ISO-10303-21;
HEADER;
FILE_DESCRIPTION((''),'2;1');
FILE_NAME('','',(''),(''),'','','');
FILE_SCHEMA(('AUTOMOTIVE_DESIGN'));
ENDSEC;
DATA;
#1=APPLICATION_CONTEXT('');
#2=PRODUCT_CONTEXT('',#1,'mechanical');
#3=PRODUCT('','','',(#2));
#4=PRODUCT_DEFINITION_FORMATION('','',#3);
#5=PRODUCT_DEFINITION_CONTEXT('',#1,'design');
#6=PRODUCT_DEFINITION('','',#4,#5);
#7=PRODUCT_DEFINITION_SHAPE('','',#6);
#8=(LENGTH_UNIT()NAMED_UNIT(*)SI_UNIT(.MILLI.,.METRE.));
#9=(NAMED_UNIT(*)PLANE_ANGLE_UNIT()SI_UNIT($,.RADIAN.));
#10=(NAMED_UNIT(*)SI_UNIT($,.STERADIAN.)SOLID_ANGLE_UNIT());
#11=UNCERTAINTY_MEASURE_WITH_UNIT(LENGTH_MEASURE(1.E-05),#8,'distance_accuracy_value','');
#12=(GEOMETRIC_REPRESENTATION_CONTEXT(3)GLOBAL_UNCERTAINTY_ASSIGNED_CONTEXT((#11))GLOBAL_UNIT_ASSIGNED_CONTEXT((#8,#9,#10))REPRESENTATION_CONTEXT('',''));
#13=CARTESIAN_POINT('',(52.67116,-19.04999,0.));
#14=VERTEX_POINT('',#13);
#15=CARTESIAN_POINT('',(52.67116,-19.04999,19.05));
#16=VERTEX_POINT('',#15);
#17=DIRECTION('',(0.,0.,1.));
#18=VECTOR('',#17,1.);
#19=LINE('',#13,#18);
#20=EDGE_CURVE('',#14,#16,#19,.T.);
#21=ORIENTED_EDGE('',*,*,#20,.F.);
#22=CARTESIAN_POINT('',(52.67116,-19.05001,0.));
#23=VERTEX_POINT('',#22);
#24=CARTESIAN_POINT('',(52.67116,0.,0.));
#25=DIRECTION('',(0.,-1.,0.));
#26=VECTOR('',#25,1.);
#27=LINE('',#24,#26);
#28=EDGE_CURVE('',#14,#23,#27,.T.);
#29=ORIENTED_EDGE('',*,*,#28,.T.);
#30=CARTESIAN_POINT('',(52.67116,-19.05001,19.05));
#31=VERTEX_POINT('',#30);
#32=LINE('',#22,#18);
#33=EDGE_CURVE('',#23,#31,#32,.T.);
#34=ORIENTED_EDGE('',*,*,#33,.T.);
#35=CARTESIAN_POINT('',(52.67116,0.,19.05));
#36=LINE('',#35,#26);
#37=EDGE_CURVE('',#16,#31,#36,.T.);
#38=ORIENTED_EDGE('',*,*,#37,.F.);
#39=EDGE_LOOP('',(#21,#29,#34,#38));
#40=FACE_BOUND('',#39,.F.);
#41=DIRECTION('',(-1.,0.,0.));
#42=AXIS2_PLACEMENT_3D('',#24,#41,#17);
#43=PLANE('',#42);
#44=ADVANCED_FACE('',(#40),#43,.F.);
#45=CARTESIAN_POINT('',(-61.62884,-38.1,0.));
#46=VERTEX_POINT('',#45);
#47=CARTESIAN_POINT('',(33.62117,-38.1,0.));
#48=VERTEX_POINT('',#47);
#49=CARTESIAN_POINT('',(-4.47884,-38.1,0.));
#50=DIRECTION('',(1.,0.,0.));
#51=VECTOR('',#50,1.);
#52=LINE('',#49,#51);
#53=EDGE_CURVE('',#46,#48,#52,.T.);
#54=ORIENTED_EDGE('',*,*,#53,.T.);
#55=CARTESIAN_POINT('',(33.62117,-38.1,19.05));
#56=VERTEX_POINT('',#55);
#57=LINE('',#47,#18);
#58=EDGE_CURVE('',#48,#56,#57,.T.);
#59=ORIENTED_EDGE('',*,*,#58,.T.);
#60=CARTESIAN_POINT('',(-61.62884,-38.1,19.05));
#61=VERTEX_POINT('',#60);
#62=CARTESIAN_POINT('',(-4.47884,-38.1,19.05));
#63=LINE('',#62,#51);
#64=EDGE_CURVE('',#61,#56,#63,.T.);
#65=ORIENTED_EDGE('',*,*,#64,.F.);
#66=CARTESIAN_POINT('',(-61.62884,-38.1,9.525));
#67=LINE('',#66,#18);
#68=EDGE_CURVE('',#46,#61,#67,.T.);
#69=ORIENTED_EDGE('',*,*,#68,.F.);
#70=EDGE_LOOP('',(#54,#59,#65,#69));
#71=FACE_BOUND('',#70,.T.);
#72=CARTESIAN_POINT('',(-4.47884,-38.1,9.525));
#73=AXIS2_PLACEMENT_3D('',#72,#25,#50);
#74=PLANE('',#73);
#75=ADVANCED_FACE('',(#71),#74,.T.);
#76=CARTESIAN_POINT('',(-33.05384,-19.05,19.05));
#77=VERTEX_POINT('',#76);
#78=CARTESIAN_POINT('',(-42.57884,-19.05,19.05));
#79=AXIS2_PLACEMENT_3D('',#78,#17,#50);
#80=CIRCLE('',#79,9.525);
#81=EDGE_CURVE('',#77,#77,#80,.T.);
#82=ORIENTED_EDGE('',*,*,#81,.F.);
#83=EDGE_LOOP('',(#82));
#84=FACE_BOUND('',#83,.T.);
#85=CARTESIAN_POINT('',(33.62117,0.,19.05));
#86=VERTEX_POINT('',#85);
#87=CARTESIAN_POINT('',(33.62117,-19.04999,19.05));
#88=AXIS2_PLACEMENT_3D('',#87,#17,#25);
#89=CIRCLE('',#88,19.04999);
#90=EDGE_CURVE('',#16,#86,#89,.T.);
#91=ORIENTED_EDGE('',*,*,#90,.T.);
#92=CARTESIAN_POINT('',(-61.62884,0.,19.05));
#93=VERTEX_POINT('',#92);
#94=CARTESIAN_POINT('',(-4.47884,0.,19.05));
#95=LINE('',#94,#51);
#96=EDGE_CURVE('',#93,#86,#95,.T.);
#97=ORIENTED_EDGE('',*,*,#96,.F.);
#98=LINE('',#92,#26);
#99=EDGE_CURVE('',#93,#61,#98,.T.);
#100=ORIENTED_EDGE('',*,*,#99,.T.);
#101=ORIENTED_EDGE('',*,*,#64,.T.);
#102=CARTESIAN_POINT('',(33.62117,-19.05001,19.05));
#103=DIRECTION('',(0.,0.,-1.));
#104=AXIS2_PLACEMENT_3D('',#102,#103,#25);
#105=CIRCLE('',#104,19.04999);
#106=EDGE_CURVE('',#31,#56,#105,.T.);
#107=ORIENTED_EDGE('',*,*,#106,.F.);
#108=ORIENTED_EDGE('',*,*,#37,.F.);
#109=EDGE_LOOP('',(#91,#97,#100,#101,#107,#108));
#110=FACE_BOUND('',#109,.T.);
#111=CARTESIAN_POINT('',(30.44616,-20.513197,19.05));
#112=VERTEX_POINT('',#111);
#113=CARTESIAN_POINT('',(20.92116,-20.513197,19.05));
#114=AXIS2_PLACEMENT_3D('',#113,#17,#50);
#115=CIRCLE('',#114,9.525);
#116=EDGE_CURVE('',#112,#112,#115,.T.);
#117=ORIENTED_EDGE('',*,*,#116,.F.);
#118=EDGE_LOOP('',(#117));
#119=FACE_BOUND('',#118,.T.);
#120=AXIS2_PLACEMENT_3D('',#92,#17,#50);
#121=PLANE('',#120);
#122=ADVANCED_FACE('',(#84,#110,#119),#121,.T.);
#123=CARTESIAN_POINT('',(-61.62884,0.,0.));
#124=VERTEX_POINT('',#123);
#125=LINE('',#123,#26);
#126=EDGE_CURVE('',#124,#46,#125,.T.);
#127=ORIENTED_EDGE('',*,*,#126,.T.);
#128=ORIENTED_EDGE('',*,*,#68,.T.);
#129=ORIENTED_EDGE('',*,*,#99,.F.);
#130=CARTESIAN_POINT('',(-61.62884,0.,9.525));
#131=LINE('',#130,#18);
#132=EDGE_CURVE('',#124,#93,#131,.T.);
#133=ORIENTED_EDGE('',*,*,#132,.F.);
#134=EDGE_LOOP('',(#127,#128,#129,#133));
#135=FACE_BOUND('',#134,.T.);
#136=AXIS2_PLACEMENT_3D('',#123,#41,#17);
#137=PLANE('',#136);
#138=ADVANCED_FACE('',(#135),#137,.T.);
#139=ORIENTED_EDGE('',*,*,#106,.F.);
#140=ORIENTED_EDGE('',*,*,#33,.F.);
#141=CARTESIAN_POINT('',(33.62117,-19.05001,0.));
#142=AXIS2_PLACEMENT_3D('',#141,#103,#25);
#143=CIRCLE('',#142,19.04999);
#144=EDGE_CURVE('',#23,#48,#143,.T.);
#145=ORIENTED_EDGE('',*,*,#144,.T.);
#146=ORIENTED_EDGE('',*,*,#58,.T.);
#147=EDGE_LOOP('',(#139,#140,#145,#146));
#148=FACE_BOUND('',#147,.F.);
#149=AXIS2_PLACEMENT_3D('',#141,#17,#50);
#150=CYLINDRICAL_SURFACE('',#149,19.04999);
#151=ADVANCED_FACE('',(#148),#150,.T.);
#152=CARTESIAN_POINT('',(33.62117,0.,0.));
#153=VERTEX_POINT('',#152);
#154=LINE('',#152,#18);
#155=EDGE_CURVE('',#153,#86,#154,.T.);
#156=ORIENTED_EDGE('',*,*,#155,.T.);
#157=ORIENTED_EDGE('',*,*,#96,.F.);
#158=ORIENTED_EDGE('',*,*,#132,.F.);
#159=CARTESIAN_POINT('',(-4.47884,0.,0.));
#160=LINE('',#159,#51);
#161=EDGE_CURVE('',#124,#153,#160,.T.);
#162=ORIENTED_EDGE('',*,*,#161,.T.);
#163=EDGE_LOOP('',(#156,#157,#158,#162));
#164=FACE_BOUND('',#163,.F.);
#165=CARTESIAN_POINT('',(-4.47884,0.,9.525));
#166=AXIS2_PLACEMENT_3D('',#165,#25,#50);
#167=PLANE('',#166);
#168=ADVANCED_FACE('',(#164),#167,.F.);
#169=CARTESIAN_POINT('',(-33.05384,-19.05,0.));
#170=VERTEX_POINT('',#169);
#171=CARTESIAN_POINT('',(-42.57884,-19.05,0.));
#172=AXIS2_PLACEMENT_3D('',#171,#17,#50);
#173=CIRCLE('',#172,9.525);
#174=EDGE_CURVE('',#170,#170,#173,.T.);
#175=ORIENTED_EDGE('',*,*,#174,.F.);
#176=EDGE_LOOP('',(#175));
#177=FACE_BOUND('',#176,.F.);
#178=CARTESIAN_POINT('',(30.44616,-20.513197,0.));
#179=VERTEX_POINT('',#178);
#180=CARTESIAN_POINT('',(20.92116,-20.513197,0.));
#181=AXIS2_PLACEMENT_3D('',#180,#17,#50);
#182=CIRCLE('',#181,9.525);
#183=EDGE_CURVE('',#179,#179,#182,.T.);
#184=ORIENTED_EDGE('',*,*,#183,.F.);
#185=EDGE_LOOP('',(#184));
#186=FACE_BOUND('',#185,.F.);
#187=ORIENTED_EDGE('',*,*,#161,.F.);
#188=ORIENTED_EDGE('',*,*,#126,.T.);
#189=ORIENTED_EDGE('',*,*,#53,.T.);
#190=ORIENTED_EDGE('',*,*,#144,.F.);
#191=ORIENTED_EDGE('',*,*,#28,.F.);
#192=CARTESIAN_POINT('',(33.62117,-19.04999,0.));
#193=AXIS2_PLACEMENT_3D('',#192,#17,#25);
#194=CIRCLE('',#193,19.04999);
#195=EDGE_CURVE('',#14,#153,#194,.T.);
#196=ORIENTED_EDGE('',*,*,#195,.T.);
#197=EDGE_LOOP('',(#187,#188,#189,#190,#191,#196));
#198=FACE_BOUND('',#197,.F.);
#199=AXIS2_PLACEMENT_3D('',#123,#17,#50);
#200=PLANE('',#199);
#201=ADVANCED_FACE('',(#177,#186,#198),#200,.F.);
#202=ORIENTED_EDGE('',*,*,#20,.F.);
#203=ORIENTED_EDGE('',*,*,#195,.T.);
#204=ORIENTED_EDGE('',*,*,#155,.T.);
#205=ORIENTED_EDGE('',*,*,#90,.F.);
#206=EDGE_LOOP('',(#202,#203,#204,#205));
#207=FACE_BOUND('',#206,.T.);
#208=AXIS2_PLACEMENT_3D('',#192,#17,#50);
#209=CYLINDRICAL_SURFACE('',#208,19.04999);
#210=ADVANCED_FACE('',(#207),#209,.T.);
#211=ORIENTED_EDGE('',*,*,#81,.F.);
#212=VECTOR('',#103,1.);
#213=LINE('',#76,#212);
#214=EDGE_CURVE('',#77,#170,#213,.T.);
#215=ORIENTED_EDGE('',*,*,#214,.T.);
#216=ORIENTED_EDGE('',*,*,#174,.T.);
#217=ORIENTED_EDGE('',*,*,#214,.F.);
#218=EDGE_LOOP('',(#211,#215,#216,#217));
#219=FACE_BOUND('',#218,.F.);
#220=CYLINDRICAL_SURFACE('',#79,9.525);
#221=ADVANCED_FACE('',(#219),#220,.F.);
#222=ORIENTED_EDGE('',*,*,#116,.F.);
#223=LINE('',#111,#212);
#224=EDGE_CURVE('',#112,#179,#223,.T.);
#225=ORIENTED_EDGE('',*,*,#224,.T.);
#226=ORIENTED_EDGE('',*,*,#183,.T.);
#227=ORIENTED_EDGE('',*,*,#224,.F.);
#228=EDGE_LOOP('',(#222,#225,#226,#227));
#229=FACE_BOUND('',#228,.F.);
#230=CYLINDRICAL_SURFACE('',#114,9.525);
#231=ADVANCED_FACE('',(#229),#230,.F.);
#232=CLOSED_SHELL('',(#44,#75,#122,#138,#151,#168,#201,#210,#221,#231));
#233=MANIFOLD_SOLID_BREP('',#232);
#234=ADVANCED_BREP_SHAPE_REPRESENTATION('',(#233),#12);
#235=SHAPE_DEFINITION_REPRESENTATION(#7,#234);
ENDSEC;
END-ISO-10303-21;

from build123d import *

# Parameters (mm, degrees)
F0_W     = 114.3
F0_H     = 19.05
F1_DEPTH = 38.1
F2_R     = 19.04999
F3_R     = 9.525
F4_DEPTH = 38.1


# Not quite as in the source:
# - a fillet or chamfer is up to 0.001 mm smaller than in the source, because OpenCascade refuses the exact size


with BuildPart() as f1:
    # F0 (on Front) → F1 (new body)
    with BuildSketch(Plane.XZ):
        with Locations((-4.4788396761, 9.525)):
            Rectangle(F0_W, F0_H)
    extrude(amount=F1_DEPTH)

    # F2 (radius 19.05 in the source; OpenCascade refuses exactly that, so slightly less here)
    f2_edges = [f1.edges().sort_by_distance(p)[0] for p in [
        (52.67116, -38.1, 9.525),
        (52.67116, 0, 9.525),
    ]]
    fillet(f2_edges, radius=F2_R)

    # F3 (on face) → F4 (cut)
    with BuildSketch(Plane.XY.offset(19.05)):
        with Locations((-42.5788396761, -19.05)):
            Circle(F3_R)
        with Locations((20.9211603239, -20.5131974071)):
            Circle(F3_R)
    extrude(amount=-F4_DEPTH, mode=Mode.SUBTRACT)


solid = f1.part
